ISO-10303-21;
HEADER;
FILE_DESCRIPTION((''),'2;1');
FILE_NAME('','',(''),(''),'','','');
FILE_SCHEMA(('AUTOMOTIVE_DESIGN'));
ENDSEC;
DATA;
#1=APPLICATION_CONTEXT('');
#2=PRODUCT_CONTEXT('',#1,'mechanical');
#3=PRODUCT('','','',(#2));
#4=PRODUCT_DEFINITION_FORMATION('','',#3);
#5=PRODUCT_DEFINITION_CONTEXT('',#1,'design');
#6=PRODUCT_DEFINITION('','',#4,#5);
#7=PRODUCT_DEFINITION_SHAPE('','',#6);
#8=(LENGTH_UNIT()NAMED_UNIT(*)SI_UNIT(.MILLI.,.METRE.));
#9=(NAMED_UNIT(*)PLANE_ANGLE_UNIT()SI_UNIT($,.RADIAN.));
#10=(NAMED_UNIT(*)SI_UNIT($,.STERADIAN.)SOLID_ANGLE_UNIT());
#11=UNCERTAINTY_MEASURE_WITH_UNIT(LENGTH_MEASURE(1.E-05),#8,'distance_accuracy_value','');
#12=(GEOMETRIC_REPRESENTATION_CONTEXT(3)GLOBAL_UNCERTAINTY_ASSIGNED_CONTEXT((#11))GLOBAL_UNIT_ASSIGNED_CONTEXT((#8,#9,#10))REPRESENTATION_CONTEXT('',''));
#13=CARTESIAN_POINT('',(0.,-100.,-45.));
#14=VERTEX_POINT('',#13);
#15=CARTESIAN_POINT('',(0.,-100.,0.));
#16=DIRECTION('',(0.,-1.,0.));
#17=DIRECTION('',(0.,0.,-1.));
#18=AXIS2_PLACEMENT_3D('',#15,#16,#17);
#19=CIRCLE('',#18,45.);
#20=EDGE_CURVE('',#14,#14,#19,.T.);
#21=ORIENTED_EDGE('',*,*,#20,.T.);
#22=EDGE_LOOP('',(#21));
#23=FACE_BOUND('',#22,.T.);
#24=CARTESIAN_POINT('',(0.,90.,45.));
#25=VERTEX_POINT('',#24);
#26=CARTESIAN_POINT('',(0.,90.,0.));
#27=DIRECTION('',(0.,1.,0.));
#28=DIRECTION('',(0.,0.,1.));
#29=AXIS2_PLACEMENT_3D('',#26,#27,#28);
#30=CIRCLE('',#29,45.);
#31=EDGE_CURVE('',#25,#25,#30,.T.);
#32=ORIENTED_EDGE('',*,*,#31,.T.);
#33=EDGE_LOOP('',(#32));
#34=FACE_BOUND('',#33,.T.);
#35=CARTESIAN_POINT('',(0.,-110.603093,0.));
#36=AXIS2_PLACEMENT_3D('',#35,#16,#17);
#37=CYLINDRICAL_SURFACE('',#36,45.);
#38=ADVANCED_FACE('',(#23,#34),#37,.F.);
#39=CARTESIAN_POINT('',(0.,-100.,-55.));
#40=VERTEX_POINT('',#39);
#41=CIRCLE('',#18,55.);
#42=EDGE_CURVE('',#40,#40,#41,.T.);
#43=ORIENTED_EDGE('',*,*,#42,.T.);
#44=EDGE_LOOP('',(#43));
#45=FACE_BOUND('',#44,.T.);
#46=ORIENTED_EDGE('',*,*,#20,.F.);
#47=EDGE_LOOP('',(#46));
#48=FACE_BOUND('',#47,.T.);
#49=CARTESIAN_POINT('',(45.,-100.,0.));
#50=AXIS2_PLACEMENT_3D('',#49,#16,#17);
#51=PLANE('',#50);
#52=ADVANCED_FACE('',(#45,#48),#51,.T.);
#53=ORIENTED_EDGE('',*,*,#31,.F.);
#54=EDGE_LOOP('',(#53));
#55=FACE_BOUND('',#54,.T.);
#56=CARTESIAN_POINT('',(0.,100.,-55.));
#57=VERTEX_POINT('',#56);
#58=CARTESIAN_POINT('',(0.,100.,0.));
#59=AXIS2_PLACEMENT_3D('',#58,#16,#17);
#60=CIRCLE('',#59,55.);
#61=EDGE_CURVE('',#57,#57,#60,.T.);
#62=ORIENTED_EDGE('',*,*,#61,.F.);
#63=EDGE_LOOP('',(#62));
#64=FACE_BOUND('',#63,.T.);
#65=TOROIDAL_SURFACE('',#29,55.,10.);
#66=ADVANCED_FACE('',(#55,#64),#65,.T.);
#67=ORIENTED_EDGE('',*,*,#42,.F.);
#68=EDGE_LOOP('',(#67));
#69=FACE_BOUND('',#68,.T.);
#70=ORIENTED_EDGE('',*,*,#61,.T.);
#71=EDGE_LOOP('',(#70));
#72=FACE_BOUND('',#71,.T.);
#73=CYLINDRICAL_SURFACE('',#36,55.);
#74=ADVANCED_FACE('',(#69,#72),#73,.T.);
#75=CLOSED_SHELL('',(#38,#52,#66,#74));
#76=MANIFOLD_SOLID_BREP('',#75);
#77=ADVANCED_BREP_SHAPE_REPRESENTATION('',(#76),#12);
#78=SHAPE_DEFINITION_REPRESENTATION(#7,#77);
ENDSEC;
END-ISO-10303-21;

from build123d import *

# Parameters (mm, degrees)
SKETCH_1_W = 10
SKETCH_1_H = 200
FILLET_2_R = 10


with BuildPart() as part:
    # Эскиз1 → Повернуть1 (revolve)
    with BuildSketch(Plane.XY, mode=Mode.PRIVATE) as revolve_1_sk:
        with Locations((50, 0)):
            Rectangle(SKETCH_1_W, SKETCH_1_H)
    revolve(revolve_1_sk.sketch.rotate(Axis((0, -110.603092707, 0), (0, 1, 0)), 90), axis=Axis((0, -110.603092707, 0), (0, 1, 0)))

    # Скругление2
    fillet_2_edges = [part.edges().sort_by_distance(p)[0] for p in [
        (0, 100, 45),
    ]]
    fillet(fillet_2_edges, radius=FILLET_2_R - 0.0001)  # a hair under: the kernel refuses the full size


solid = part.part
